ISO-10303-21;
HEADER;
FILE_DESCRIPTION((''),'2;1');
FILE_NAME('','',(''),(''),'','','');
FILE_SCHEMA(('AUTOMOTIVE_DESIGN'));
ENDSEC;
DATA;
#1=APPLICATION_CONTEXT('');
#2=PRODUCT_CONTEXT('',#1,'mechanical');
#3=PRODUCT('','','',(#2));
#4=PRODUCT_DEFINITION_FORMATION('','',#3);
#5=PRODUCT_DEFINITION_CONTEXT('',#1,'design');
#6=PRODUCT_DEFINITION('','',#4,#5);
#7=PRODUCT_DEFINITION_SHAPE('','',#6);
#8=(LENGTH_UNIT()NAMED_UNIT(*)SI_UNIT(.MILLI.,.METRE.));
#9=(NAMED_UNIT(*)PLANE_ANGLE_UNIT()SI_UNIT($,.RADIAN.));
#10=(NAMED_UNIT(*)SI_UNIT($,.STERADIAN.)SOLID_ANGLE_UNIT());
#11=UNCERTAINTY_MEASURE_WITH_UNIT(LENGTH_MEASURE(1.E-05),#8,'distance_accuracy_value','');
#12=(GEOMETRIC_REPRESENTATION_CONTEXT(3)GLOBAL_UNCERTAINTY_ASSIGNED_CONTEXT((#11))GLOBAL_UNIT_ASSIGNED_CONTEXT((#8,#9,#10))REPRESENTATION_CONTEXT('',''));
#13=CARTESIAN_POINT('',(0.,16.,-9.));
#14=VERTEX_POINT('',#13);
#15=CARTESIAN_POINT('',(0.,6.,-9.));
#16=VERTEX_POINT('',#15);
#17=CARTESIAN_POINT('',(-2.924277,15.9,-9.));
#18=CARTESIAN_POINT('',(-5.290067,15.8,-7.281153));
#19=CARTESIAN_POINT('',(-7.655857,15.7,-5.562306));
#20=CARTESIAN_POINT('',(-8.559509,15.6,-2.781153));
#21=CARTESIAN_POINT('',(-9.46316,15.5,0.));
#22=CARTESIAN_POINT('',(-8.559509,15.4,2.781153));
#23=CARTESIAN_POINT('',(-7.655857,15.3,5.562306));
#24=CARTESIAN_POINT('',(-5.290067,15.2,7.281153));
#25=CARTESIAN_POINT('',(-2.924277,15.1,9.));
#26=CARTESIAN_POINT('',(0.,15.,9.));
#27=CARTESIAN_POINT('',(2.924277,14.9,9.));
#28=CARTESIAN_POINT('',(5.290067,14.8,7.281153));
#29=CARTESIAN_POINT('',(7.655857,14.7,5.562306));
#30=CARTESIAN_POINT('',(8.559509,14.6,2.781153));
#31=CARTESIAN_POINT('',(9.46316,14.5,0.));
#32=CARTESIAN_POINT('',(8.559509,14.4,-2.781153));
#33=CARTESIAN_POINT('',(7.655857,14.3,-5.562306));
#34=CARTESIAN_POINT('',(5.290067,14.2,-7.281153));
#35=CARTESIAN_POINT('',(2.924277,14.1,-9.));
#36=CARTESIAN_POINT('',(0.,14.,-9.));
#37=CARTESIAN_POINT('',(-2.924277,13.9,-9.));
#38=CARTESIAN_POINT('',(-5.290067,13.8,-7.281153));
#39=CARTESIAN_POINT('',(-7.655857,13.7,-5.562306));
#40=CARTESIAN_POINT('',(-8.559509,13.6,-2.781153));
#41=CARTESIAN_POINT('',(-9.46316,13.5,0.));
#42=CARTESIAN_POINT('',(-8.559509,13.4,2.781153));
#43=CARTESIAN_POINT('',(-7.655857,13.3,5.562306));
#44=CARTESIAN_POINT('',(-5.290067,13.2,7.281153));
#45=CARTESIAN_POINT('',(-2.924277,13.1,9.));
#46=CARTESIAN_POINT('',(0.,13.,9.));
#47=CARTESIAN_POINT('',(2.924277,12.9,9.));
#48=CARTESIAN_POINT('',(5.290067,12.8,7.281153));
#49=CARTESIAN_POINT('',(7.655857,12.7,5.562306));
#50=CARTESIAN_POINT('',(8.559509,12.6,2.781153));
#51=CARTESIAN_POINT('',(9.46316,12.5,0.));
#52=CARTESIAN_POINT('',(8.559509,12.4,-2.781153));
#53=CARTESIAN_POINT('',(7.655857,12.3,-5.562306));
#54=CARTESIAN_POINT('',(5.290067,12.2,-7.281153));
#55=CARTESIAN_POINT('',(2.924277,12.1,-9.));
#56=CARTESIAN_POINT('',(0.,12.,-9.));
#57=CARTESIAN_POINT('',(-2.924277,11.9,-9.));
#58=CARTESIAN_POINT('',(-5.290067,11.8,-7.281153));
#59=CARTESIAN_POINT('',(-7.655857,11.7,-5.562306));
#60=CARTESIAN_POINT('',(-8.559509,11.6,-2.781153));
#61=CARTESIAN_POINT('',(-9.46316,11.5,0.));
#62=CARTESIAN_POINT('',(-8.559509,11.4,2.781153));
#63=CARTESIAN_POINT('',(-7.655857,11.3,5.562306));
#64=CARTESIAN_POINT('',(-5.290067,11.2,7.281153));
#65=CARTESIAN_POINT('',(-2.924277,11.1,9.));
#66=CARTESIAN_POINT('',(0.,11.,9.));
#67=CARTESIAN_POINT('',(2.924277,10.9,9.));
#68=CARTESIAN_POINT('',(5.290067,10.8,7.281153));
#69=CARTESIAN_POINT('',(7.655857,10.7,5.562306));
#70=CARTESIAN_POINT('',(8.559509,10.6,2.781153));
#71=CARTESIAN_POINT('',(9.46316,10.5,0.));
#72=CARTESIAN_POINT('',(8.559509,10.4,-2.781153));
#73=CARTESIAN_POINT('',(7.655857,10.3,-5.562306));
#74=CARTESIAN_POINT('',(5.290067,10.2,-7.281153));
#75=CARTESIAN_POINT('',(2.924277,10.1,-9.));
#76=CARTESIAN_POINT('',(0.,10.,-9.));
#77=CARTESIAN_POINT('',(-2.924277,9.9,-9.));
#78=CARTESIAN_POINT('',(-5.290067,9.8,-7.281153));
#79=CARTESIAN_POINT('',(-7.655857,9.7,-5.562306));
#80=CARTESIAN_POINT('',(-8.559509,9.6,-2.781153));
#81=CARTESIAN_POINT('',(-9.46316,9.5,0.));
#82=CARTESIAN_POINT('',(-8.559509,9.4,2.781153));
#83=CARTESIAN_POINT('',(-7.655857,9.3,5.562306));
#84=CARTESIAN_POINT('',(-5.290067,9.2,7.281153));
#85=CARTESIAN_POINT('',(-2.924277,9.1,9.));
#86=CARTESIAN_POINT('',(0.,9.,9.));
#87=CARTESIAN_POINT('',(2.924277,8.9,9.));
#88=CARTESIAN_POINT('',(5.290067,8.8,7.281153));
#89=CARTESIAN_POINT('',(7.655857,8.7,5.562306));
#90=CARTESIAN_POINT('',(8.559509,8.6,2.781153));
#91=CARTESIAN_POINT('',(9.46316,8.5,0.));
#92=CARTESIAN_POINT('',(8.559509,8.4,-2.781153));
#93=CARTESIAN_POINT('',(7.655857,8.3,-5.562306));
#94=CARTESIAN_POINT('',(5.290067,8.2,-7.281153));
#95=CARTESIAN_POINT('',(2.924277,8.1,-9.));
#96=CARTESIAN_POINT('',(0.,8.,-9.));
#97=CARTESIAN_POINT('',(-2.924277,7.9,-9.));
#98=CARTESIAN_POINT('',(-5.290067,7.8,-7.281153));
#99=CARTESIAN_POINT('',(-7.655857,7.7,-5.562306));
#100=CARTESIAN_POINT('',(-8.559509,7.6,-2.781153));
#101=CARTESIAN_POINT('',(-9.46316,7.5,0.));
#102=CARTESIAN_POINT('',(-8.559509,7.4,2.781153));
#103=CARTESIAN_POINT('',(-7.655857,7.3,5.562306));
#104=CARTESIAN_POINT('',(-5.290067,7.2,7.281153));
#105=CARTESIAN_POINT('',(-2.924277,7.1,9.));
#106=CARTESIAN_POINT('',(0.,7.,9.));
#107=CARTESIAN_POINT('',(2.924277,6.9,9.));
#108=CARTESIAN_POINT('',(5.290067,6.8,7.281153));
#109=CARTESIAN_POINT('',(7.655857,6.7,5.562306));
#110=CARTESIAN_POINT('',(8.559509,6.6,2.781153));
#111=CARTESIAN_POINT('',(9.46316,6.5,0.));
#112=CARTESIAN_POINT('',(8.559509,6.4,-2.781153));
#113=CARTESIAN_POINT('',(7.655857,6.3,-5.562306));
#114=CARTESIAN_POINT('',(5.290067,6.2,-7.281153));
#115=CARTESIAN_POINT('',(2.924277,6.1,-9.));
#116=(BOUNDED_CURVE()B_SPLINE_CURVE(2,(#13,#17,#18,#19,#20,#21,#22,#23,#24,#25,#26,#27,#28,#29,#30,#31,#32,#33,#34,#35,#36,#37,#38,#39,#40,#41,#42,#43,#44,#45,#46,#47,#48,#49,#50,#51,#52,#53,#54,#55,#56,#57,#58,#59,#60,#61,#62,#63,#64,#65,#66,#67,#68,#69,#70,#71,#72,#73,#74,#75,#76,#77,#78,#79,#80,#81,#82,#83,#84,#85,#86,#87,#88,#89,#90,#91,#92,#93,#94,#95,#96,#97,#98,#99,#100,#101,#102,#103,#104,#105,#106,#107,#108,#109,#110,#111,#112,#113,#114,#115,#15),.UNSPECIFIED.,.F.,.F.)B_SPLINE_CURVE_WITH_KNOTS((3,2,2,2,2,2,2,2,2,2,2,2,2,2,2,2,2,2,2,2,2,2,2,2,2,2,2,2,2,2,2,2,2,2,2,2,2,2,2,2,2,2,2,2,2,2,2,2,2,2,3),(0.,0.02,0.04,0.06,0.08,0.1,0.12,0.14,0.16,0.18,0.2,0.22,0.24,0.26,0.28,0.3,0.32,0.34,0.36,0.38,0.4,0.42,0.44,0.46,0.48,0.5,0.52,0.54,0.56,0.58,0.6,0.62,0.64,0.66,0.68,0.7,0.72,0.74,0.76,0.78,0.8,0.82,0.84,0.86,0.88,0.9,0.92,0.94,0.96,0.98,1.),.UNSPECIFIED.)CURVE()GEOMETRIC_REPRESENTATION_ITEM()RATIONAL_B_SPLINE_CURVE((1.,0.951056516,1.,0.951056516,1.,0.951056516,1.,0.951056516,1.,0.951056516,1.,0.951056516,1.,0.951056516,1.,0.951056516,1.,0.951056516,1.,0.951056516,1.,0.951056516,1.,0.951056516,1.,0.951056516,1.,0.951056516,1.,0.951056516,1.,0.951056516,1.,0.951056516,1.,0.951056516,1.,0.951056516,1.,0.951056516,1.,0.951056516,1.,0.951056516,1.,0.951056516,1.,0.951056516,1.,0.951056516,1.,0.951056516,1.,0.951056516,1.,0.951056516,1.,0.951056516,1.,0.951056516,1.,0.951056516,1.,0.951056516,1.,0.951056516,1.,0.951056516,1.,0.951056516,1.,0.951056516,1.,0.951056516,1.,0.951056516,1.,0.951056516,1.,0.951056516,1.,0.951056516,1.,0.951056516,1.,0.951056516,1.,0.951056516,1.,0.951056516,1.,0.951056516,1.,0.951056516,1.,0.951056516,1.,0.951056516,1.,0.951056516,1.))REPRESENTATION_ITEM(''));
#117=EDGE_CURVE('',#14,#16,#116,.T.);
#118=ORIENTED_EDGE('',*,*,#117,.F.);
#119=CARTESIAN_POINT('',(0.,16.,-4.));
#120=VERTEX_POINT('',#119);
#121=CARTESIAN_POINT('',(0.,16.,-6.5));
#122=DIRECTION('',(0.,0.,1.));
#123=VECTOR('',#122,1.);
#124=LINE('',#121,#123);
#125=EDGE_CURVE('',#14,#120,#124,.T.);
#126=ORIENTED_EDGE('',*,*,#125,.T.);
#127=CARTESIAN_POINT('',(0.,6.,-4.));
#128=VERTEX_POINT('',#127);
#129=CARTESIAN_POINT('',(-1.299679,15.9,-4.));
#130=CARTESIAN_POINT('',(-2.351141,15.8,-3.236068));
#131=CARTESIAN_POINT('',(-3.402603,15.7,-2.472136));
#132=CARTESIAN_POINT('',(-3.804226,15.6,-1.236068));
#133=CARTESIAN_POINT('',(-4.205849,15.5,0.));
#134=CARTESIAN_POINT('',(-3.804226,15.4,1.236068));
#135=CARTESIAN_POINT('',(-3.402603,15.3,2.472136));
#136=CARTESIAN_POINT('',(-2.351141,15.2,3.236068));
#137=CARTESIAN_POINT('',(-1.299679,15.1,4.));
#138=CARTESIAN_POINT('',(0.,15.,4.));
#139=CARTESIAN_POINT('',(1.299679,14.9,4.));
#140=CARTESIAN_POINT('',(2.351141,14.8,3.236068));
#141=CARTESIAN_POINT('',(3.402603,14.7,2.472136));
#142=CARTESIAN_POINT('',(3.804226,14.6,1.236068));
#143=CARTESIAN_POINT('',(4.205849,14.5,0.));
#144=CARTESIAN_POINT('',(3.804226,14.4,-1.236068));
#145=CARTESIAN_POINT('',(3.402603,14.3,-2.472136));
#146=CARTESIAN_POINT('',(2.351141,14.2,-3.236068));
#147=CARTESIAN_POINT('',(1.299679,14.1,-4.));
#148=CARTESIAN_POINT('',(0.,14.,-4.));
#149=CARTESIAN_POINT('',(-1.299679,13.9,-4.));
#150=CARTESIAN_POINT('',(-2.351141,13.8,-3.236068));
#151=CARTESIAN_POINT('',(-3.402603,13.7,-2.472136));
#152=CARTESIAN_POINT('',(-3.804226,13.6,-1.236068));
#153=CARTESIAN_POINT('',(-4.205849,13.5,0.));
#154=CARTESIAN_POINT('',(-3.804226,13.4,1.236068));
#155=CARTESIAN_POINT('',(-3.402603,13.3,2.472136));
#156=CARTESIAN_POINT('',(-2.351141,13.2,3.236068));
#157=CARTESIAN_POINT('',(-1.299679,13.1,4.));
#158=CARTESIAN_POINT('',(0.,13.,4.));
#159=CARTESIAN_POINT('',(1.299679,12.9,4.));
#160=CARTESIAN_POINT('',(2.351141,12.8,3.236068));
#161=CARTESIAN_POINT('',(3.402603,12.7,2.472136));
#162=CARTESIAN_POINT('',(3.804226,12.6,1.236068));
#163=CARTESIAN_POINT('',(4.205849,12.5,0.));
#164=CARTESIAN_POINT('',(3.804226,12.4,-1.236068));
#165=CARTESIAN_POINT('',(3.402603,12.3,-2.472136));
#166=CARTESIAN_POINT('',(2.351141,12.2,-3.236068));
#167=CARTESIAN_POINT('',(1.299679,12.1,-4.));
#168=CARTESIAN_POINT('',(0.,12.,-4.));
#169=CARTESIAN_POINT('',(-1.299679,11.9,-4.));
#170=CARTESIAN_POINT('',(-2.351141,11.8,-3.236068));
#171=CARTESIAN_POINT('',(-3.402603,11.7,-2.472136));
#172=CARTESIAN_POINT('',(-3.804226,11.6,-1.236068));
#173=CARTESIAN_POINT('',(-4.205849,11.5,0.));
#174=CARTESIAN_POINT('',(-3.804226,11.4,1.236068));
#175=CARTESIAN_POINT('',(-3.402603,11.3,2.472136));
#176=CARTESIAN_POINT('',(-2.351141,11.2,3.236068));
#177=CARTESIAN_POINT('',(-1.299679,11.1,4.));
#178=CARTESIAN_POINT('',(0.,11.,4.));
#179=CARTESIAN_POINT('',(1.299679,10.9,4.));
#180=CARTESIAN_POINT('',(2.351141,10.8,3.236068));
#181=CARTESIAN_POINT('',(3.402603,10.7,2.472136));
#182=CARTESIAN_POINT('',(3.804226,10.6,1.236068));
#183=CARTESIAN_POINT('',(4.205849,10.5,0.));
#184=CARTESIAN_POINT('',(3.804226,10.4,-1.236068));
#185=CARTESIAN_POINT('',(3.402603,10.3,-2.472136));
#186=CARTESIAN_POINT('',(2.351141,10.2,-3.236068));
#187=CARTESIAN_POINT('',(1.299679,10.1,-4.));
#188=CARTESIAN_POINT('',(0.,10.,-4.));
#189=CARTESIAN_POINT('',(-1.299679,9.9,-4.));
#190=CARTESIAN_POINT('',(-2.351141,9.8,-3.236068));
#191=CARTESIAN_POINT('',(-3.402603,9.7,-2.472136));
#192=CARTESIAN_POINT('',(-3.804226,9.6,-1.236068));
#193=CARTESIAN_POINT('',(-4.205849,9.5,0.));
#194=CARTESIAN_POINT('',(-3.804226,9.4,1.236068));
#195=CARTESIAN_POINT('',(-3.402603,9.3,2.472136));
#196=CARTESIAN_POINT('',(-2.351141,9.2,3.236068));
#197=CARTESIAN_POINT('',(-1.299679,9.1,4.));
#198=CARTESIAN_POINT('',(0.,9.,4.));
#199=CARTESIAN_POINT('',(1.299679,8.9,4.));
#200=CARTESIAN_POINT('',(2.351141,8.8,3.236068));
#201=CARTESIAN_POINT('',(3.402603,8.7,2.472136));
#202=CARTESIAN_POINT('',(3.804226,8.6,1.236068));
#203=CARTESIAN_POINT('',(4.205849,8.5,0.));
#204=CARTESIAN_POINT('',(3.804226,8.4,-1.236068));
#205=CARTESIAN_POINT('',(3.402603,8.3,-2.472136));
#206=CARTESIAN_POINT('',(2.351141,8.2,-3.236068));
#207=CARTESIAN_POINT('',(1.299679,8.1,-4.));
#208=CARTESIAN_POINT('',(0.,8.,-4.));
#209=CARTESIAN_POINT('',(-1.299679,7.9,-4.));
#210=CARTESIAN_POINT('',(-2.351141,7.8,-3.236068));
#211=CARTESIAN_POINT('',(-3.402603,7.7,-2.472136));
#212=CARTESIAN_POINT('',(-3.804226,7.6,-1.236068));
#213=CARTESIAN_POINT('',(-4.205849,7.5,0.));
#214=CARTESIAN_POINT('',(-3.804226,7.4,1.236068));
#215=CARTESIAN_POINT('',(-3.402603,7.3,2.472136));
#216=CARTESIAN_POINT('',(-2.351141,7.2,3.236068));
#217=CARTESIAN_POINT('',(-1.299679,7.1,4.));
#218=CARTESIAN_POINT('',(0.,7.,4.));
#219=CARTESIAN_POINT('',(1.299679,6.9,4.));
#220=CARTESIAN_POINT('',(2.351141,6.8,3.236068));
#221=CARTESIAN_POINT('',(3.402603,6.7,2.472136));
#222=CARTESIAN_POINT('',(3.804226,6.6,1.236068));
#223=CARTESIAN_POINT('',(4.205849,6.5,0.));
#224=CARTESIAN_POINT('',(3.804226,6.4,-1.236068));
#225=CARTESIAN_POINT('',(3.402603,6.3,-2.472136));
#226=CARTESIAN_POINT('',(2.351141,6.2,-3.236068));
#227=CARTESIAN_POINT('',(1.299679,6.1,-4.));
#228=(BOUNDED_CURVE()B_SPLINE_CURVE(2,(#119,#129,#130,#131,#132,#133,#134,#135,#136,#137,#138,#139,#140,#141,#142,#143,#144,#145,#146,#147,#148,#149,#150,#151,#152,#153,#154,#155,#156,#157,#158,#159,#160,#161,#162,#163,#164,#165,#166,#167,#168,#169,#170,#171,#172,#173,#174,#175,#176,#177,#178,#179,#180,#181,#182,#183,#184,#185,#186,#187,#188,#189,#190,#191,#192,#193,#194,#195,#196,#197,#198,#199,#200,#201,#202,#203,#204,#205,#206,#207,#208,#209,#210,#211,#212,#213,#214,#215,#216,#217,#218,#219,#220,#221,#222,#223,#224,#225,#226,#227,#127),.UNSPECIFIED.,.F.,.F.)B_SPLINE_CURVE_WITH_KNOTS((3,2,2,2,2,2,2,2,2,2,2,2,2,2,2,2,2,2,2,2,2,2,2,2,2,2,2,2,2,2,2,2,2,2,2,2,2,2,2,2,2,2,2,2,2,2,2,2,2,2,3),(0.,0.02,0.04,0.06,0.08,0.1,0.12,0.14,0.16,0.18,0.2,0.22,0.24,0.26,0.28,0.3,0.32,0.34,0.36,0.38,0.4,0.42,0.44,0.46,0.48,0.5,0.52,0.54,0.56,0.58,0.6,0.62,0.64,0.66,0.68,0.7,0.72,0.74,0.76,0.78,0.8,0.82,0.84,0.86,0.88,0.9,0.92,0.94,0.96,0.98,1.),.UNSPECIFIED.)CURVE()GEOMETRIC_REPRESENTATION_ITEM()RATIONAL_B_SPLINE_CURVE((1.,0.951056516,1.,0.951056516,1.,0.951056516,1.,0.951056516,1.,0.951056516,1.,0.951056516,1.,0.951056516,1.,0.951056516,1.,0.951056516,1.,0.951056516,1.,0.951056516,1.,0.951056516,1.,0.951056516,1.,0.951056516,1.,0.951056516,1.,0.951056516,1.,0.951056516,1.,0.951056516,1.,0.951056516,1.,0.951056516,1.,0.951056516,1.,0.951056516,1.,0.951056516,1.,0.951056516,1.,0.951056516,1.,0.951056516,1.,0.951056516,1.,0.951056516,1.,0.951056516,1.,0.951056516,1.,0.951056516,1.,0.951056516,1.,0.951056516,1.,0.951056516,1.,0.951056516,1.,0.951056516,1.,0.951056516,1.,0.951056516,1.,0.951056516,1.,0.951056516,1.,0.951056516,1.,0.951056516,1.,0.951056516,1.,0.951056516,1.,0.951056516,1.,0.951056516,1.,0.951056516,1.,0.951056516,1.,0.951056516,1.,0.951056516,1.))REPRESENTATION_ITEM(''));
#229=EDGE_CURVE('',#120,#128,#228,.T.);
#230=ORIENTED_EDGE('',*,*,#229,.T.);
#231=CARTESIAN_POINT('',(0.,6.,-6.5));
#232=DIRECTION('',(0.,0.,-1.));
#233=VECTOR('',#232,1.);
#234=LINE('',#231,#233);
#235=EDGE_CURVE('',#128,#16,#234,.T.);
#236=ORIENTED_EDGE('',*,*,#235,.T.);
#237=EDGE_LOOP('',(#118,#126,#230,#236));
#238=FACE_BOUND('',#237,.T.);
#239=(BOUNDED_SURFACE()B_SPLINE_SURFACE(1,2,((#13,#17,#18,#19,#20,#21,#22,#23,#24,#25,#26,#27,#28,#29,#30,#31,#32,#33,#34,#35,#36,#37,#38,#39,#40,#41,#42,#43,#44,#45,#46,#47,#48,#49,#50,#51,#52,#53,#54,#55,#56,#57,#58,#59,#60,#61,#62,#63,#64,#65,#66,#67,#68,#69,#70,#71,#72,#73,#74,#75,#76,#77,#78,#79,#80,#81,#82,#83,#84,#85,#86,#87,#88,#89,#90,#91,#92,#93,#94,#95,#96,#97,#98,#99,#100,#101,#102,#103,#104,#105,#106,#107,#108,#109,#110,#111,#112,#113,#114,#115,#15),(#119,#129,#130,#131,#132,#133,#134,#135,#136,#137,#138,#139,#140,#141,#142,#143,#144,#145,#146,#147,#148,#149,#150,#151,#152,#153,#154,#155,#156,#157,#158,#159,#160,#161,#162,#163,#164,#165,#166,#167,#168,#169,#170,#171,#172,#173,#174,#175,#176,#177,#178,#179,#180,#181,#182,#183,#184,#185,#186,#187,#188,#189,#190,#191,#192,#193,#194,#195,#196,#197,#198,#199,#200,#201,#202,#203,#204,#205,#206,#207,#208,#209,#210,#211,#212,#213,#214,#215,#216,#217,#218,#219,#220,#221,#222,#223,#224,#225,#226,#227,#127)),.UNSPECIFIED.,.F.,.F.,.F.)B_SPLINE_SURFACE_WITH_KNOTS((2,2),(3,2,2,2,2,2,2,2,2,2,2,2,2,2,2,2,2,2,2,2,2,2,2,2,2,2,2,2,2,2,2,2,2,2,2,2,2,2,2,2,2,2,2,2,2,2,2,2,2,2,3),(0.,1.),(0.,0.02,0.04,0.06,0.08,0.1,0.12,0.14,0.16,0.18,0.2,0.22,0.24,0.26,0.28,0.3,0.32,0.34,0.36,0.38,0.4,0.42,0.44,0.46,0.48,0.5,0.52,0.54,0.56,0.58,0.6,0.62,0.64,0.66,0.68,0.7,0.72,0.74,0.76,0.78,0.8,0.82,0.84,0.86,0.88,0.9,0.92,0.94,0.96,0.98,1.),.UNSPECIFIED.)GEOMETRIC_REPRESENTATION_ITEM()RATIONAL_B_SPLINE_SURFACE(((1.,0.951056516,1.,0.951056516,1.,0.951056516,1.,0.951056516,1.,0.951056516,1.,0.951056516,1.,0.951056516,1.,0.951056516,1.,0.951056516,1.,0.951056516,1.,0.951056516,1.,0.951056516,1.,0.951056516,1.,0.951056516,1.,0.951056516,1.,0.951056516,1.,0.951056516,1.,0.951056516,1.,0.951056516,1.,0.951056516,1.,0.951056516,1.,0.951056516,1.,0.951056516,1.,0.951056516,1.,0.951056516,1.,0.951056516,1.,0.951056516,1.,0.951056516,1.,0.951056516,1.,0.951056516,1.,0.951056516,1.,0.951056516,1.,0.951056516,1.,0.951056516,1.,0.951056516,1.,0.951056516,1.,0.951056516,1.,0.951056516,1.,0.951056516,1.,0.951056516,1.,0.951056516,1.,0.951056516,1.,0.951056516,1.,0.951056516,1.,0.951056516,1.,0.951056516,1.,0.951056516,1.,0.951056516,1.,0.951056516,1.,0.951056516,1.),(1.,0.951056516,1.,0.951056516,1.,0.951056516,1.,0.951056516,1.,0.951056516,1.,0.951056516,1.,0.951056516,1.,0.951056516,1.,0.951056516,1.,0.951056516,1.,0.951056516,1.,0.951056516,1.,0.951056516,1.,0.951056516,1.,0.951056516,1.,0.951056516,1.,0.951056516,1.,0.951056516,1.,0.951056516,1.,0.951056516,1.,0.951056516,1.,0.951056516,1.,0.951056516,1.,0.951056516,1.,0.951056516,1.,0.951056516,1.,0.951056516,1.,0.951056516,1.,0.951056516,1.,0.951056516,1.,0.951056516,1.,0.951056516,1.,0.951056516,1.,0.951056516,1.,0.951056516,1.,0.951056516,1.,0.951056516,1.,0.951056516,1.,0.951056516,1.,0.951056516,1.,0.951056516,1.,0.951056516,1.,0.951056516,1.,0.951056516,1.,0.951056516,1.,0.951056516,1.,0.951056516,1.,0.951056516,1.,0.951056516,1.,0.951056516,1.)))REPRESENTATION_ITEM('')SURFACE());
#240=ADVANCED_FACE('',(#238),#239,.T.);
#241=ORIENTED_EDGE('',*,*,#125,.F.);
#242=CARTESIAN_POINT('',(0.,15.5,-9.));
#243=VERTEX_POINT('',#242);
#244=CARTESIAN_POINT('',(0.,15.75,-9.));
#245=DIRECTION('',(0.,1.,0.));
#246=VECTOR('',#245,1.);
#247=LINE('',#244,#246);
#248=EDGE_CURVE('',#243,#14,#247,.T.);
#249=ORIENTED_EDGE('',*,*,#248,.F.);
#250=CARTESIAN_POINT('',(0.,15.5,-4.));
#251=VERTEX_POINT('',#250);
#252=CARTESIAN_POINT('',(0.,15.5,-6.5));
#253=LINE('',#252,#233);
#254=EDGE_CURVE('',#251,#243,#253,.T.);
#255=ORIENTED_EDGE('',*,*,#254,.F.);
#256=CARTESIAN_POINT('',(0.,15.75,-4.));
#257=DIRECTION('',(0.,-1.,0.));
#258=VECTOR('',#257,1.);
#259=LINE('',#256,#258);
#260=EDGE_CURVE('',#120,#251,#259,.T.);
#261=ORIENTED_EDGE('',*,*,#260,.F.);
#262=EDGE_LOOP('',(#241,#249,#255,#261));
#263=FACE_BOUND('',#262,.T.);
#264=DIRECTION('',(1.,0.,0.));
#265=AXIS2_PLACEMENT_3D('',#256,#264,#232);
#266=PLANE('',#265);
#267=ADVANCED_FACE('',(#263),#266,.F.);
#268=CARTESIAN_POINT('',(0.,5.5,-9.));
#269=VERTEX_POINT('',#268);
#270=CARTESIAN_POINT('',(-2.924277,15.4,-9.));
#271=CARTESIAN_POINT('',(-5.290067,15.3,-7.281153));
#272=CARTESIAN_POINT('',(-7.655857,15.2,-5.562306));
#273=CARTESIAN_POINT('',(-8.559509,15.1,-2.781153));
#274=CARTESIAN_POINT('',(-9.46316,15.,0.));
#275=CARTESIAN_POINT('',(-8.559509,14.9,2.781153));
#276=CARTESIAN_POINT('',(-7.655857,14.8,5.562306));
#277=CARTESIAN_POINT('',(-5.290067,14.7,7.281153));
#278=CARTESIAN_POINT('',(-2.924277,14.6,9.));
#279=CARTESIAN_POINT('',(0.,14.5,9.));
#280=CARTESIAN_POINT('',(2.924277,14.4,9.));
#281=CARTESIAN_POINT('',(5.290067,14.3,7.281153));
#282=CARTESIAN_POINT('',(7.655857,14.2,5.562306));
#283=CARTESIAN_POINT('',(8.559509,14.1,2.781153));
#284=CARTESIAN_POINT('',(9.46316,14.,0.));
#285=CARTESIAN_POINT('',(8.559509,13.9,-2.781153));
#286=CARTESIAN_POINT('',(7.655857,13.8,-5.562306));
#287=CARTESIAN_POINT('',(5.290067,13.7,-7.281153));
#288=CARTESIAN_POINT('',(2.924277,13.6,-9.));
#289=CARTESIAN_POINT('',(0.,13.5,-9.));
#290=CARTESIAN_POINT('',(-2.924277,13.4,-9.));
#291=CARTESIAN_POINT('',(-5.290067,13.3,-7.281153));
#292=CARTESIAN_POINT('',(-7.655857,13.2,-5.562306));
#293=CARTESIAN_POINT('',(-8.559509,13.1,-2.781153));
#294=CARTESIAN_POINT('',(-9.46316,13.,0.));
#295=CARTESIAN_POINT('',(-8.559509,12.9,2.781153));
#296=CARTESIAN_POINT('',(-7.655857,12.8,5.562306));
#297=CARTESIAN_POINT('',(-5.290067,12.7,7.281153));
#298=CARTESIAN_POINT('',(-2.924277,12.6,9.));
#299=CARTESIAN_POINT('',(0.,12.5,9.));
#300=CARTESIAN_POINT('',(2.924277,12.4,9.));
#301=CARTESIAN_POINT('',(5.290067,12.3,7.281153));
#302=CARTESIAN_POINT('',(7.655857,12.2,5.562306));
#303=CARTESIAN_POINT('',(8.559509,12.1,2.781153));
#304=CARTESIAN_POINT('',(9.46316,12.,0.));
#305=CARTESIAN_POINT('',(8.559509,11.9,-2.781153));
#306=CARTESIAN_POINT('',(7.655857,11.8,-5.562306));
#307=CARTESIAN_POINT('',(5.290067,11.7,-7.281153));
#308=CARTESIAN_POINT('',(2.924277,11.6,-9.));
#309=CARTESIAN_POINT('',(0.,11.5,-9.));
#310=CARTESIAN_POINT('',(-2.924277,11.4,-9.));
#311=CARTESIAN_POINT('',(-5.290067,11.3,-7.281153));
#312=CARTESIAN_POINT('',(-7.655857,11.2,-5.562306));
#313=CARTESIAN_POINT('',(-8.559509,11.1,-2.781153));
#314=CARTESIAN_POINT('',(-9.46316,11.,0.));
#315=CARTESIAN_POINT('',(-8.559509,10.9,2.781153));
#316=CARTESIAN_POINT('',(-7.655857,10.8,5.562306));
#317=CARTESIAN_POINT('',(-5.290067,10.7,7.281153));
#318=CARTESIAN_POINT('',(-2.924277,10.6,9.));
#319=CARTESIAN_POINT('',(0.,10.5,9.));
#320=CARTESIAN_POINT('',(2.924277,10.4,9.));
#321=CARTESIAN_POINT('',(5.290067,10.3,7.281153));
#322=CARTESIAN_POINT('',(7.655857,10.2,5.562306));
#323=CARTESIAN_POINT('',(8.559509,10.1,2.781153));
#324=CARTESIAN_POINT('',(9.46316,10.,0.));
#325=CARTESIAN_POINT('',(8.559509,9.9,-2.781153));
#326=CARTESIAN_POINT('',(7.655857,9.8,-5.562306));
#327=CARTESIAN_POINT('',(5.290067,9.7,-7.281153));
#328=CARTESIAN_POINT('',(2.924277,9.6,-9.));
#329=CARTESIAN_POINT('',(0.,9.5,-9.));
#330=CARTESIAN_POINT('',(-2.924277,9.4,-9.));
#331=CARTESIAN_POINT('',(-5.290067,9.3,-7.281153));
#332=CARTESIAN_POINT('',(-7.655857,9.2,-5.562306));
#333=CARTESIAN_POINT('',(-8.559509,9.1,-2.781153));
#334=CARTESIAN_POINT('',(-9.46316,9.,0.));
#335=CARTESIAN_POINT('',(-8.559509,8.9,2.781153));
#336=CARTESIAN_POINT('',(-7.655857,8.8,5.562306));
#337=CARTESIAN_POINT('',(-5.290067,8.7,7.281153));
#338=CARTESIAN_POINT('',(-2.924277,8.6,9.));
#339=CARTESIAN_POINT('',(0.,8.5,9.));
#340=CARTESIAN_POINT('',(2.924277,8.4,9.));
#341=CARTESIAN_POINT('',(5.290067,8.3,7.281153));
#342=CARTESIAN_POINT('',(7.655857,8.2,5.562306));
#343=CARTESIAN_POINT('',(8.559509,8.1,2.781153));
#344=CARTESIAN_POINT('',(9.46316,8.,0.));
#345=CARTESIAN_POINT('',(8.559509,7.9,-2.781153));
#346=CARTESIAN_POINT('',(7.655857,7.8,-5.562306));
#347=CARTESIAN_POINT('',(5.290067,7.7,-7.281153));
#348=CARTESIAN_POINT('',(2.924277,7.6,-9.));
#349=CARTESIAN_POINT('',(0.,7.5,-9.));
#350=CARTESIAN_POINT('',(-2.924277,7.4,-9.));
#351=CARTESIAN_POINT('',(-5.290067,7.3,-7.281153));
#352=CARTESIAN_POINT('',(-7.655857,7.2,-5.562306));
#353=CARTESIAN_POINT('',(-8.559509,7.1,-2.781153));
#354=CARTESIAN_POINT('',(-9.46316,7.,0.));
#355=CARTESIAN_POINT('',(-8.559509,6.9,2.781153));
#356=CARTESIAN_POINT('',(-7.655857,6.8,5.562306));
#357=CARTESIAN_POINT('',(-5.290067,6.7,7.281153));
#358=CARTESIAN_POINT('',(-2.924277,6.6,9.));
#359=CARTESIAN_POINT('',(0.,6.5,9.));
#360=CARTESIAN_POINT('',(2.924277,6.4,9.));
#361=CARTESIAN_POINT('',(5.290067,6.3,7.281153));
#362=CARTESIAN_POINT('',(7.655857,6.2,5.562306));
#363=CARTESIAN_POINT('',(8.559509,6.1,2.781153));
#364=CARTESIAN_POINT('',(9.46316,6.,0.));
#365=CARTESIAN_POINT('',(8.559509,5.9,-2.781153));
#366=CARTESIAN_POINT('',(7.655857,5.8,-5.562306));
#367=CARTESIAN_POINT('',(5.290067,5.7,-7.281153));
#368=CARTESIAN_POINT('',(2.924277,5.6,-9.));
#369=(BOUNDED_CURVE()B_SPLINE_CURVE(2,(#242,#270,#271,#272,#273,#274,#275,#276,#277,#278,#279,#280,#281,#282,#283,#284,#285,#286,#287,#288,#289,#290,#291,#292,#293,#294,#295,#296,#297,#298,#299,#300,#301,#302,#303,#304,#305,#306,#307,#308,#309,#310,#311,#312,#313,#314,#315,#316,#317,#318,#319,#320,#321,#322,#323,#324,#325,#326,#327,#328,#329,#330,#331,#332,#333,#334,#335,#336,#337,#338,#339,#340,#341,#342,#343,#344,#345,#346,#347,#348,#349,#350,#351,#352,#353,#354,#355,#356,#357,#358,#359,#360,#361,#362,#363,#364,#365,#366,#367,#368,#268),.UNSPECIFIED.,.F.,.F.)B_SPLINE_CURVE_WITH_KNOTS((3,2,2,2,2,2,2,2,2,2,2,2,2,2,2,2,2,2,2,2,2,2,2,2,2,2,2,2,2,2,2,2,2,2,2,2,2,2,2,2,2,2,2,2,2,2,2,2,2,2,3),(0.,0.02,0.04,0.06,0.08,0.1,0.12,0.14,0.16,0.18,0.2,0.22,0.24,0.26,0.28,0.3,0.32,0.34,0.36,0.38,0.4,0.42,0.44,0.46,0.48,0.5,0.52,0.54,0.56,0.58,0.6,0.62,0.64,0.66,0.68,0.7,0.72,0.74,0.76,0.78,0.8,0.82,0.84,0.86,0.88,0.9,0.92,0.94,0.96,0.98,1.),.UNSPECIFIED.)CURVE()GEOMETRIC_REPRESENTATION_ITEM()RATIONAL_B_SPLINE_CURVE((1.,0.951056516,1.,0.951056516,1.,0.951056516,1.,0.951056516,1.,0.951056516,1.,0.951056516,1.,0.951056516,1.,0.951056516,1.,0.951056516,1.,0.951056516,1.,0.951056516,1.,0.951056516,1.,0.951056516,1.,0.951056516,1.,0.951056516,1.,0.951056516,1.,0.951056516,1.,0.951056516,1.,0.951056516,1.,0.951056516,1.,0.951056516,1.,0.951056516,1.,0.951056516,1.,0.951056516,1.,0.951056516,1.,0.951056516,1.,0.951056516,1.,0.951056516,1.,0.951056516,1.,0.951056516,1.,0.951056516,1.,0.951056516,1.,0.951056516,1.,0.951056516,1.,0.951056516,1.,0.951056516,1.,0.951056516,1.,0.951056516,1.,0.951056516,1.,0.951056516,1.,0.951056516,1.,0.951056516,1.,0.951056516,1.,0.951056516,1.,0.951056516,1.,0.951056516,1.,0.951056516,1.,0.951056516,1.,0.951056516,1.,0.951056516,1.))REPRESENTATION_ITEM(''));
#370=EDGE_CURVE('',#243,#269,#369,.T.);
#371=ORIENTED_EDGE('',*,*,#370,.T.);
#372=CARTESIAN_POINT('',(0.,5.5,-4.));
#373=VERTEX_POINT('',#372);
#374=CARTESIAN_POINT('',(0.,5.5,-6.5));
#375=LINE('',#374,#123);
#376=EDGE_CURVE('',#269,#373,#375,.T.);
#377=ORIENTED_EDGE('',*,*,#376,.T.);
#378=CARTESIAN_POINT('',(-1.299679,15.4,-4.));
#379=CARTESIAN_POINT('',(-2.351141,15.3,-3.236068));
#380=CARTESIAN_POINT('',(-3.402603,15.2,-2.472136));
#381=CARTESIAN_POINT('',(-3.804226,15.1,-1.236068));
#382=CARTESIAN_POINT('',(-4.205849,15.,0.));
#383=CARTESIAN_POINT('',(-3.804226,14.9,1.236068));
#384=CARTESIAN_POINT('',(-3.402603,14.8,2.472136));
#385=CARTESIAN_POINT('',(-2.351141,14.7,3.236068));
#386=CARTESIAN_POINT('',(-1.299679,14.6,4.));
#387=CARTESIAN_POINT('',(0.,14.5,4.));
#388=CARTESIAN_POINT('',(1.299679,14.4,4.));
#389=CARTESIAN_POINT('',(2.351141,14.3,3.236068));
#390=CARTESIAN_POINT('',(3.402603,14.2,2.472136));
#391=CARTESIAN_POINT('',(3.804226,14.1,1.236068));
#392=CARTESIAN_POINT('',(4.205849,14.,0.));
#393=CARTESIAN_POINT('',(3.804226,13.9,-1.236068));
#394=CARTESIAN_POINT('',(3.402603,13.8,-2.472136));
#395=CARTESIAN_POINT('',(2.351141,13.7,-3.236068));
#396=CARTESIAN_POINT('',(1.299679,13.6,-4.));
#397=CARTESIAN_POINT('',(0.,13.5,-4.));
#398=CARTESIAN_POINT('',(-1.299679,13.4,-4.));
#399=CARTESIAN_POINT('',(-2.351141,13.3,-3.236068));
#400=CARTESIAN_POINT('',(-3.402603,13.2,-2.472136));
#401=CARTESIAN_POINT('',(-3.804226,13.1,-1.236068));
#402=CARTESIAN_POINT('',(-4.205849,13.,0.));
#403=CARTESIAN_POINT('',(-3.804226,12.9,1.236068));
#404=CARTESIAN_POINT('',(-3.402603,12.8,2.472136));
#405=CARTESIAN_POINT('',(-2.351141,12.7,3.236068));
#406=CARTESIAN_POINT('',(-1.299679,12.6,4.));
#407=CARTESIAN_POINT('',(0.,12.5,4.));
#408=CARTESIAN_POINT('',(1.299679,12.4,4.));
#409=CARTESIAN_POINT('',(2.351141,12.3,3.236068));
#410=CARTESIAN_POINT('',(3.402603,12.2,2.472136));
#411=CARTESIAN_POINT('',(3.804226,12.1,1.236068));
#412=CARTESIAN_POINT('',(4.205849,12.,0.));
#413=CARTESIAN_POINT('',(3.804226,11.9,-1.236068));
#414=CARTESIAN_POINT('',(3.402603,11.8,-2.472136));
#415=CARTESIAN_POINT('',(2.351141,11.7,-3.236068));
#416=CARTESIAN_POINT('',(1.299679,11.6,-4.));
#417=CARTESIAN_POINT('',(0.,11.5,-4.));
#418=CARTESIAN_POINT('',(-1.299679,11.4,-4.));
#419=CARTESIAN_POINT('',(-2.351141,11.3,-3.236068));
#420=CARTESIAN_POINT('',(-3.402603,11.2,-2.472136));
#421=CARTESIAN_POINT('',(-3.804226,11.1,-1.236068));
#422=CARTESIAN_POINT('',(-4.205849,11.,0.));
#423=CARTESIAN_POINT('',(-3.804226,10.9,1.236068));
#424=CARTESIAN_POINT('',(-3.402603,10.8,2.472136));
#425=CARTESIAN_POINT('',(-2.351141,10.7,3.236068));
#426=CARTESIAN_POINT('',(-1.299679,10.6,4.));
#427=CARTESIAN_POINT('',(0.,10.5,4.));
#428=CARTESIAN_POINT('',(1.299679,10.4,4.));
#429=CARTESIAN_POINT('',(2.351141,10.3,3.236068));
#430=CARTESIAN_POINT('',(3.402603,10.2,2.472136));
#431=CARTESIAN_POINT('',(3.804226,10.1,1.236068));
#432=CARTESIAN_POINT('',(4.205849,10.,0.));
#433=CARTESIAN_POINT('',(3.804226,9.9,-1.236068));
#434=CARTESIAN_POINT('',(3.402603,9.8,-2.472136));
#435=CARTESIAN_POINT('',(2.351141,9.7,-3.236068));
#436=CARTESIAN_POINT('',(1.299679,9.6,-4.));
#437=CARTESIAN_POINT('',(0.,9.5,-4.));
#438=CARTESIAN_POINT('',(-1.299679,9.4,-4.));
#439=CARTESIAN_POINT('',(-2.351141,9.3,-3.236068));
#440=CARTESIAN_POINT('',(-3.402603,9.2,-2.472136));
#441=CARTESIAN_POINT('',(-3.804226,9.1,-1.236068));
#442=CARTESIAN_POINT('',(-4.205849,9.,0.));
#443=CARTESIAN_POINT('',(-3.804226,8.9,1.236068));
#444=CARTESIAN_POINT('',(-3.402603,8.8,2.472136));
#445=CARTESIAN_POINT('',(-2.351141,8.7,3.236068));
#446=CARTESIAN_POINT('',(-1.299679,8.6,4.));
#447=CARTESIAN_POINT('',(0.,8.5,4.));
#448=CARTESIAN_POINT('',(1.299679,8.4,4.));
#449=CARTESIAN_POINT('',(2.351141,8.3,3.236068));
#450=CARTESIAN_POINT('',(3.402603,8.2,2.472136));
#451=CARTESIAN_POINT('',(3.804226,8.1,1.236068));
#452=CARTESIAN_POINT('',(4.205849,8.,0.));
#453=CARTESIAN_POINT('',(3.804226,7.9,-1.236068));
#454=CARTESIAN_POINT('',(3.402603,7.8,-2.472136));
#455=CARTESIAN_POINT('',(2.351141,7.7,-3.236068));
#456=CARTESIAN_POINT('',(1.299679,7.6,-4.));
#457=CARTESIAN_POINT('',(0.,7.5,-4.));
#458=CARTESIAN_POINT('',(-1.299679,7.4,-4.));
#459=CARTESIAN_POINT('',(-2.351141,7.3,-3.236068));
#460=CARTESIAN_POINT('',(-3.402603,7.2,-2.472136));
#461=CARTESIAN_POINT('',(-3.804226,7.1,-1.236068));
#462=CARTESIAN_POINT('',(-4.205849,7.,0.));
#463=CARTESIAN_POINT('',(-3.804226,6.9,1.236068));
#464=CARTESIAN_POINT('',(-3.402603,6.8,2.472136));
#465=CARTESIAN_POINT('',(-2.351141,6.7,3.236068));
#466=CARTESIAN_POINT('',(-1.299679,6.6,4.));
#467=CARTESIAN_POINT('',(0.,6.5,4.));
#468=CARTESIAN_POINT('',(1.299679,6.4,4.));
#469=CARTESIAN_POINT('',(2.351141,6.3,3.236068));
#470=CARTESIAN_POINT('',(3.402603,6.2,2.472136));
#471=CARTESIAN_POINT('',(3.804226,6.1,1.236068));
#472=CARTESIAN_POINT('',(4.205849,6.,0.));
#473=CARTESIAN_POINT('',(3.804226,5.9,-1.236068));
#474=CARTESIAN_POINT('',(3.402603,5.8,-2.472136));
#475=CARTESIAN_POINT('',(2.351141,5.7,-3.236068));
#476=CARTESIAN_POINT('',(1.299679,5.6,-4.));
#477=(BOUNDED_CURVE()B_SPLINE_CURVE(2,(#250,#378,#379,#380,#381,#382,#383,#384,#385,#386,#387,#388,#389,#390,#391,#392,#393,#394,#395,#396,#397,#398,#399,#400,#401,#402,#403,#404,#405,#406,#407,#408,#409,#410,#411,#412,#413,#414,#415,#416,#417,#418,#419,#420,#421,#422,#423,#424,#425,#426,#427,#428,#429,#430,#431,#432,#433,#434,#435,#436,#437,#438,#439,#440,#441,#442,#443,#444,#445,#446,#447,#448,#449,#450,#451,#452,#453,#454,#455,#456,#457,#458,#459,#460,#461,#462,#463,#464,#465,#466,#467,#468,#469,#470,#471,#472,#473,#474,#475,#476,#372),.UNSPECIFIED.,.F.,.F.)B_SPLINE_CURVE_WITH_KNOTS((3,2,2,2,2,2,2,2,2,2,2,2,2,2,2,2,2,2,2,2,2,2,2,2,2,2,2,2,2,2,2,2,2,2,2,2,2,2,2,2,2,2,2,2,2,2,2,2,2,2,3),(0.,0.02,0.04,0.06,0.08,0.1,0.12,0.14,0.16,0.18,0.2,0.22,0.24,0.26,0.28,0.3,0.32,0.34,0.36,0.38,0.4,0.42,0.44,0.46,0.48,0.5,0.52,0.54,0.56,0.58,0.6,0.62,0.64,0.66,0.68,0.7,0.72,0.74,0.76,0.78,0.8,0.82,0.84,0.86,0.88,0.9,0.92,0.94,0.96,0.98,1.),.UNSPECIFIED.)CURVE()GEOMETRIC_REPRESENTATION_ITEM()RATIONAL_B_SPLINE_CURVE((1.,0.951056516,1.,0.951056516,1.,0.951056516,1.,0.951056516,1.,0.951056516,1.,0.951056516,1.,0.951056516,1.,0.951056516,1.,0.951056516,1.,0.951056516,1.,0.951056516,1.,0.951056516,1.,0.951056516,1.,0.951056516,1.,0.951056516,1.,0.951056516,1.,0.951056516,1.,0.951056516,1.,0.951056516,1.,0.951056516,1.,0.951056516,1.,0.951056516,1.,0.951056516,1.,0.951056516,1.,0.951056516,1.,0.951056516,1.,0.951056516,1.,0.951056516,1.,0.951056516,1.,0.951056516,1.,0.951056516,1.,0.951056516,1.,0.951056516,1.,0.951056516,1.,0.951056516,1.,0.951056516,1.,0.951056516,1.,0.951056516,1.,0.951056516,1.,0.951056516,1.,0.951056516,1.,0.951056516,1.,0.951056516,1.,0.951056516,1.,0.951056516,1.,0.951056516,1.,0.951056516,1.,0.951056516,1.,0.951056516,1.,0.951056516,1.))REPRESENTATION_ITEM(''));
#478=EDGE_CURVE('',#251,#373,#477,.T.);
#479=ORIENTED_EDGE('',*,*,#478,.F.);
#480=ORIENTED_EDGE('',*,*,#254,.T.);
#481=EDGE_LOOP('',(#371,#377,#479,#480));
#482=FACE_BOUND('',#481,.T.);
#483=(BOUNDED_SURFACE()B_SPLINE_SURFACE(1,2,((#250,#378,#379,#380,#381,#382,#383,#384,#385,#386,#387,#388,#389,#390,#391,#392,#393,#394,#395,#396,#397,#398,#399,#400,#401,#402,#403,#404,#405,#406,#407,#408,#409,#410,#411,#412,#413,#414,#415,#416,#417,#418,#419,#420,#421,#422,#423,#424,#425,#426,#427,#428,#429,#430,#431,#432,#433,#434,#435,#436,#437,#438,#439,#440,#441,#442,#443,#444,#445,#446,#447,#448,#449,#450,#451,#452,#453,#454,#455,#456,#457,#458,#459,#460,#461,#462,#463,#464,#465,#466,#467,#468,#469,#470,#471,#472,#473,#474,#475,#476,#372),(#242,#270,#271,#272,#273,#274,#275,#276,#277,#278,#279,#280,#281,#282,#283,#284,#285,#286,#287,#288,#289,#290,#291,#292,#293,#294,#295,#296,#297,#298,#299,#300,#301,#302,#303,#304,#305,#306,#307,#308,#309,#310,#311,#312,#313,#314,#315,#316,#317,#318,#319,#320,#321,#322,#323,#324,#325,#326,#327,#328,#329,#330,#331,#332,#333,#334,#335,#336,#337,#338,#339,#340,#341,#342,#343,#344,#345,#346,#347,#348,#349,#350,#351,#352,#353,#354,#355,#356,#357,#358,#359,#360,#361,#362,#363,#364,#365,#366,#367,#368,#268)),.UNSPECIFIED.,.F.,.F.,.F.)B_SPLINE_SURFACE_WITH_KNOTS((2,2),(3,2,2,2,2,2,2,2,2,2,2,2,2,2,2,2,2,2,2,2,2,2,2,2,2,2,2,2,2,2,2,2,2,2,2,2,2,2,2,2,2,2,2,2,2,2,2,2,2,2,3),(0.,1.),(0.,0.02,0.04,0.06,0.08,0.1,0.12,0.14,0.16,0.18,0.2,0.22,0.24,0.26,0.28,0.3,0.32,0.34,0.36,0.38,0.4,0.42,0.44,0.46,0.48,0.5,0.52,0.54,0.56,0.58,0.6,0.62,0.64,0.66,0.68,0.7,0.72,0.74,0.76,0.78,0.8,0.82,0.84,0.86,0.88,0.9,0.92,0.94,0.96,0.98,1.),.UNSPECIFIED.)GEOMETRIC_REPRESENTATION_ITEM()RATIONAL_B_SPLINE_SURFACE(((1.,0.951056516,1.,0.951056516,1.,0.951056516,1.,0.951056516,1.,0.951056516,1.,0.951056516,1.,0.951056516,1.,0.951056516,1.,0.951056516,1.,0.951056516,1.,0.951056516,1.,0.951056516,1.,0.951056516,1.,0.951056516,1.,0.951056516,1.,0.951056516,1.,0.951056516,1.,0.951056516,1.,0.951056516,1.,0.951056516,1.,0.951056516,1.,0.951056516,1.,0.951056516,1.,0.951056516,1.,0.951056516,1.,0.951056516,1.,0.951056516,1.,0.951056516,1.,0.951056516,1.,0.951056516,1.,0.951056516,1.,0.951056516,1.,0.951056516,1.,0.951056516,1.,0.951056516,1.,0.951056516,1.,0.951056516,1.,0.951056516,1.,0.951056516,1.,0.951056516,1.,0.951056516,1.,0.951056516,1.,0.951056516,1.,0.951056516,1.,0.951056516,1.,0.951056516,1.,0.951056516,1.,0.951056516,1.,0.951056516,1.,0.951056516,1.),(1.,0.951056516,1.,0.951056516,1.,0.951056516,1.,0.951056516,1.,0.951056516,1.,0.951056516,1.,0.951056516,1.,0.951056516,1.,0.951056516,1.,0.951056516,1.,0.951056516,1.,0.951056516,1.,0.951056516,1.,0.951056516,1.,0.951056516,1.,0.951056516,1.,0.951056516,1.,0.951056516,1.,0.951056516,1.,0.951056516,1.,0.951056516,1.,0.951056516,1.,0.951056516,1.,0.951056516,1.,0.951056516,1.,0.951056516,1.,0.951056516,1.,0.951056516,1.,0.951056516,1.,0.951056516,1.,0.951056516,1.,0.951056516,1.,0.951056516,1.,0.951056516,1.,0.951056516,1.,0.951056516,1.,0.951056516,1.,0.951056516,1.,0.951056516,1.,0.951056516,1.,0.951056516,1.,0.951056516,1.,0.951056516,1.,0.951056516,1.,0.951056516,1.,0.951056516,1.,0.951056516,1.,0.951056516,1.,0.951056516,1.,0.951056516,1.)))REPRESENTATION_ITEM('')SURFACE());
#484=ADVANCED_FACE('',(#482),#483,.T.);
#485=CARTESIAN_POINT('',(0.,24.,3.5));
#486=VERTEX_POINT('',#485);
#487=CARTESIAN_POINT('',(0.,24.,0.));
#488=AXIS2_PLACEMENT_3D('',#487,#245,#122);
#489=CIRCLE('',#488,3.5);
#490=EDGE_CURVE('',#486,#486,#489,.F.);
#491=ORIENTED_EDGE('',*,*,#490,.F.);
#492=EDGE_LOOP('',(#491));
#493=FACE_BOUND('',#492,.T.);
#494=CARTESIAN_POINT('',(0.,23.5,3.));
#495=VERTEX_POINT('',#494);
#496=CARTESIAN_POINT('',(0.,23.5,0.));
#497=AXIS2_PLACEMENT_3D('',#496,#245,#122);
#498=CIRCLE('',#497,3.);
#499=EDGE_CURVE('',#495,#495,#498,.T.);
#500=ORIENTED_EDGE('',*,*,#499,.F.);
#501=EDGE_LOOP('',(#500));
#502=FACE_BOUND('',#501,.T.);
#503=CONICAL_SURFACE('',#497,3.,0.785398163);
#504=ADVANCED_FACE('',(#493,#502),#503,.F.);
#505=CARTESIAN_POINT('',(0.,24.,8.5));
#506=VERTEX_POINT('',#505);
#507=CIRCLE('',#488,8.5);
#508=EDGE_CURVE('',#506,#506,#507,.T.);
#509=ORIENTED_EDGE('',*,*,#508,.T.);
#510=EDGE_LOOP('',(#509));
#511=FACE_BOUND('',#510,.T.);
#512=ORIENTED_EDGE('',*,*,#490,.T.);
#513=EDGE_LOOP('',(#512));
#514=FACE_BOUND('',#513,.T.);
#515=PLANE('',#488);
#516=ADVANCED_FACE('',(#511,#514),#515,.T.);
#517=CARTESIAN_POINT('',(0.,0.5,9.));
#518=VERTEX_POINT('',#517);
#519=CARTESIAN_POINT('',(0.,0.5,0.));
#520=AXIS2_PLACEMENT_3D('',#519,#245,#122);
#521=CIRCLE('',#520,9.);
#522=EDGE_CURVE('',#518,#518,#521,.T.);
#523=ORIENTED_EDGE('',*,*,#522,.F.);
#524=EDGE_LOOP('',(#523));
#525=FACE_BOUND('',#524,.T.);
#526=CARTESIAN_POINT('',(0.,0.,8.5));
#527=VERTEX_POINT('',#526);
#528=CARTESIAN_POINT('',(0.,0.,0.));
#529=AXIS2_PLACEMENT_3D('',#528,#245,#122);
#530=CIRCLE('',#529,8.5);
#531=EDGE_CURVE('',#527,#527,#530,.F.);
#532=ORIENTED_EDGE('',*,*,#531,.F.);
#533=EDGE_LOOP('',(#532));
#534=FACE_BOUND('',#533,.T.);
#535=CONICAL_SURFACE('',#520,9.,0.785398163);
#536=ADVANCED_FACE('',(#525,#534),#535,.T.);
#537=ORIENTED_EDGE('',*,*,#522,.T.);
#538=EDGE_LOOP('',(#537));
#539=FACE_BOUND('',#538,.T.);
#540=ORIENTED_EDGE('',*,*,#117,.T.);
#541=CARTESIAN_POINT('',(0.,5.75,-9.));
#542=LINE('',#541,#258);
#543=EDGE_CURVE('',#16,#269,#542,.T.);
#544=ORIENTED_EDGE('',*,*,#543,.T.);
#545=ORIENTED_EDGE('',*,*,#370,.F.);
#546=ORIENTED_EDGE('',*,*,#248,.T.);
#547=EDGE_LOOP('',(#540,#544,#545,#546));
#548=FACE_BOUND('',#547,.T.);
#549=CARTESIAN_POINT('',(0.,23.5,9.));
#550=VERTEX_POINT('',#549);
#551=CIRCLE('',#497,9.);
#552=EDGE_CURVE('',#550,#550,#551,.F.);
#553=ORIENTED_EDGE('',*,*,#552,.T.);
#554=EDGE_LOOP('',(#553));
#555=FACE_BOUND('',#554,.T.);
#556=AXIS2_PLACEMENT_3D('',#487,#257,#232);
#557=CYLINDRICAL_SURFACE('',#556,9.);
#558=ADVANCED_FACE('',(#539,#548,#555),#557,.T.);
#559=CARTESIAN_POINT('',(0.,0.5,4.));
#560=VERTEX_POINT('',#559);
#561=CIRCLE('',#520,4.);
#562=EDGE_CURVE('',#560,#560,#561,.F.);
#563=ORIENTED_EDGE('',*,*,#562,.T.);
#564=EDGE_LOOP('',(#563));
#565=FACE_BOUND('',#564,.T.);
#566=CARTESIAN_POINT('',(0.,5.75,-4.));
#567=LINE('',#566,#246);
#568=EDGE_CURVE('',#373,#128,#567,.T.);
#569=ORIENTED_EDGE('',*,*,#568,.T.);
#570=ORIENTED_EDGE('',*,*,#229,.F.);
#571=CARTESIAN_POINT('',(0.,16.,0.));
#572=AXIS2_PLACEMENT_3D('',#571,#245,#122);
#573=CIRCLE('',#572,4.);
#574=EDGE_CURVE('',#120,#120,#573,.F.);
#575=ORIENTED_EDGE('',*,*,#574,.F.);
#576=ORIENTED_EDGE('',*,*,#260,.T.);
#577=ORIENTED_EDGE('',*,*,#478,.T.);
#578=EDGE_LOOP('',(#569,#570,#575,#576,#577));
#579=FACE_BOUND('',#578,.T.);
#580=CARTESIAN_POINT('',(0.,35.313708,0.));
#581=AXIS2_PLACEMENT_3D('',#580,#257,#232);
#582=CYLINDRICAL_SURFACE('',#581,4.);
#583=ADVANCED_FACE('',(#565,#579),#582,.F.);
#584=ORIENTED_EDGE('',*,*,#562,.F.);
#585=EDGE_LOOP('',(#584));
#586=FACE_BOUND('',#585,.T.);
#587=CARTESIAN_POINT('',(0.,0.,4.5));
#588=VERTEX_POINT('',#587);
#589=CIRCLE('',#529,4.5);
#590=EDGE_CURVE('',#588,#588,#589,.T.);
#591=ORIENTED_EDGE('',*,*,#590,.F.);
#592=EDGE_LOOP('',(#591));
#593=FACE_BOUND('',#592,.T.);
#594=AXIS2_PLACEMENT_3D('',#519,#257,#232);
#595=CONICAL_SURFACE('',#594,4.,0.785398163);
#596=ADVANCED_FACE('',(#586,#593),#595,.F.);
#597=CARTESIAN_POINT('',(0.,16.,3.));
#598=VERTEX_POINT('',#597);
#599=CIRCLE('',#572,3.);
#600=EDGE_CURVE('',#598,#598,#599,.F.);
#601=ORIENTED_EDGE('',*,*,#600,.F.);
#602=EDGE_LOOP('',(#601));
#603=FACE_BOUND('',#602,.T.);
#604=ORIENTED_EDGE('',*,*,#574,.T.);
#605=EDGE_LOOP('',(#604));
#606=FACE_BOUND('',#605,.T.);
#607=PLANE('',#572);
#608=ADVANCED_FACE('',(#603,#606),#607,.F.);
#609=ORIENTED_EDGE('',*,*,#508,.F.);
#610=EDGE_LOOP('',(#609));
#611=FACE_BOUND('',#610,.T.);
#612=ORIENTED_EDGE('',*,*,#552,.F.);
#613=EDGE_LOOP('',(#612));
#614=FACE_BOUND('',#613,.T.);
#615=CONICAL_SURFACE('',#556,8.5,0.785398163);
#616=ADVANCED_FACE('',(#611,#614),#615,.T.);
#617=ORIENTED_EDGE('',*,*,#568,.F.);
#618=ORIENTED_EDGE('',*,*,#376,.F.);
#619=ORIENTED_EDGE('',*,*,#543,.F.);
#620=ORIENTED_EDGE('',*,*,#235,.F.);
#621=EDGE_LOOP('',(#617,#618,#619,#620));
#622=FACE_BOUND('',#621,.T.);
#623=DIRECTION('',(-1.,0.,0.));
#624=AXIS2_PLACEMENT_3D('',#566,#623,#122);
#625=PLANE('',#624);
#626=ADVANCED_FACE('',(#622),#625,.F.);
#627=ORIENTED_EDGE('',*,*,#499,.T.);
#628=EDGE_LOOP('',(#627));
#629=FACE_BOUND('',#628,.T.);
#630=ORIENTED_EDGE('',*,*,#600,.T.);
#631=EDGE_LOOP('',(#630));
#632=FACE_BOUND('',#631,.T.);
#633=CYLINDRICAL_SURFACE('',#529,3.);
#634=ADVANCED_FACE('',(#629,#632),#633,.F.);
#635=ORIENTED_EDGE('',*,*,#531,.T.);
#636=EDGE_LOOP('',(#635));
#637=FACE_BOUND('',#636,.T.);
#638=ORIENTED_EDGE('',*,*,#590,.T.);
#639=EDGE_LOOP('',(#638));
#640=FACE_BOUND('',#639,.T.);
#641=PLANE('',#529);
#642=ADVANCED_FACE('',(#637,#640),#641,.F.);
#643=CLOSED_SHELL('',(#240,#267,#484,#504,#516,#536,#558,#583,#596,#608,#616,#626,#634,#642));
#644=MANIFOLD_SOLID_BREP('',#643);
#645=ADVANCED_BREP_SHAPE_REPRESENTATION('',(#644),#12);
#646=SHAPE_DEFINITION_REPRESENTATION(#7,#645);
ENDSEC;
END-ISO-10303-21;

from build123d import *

# Parameters (mm, degrees)
SKETCH1_R           = 9
BOSS_EXTRUDE1_DEPTH = 24
SKETCH2_R           = 3
CUT_EXTRUDE1_DEPTH  = 28.166155414
SKETCH3_R           = 4
CUT_EXTRUDE2_DEPTH  = 16
CHAMFER1_SIZE       = 0.5
CUT_SWEEP2_PITCH    = 2


with BuildPart() as part:
    # Sketch1 → Boss-Extrude1 (new body)
    with BuildSketch(Plane(origin=(0, 0, 0), x_dir=(1, 0, 0), z_dir=(0, 1, 0))):
        with Locations(Location((0, 0, 0), (0, 0, 270))):
            Circle(SKETCH1_R)
    extrude(amount=BOSS_EXTRUDE1_DEPTH)

    # Sketch2 → Cut-Extrude1 (cut, through all)
    with BuildSketch(Plane(origin=(0, 24, 0), x_dir=(1, 0, 0), z_dir=(0, 1, 0))):
        with Locations(Location((0, 0, 0), (0, 0, 270))):
            Circle(SKETCH2_R)
    extrude(amount=-CUT_EXTRUDE1_DEPTH, mode=Mode.SUBTRACT)

    # Sketch3 → Cut-Extrude2 (cut)
    with BuildSketch(Plane.XZ):
        with Locations(Location((0, 0, 0), (0, 0, 270))):
            Circle(SKETCH3_R)
    extrude(amount=-CUT_EXTRUDE2_DEPTH, mode=Mode.SUBTRACT)

    # Chamfer1
    chamfer1_edges = [part.edges().sort_by_distance(p)[0] for p in [
        (0, 0, 4),
        (0, 0, -9),
        (0, 24, -9),
        (0, 24, -3),
    ]]
    chamfer(chamfer1_edges, length=CHAMFER1_SIZE)

    # Cut-Sweep2: the profile of Sketch8 profile screwed along a left-hand helix of 5 turns, 10 arcs to a turn; built about Z, then put on its axis
    cut_sweep2_z = Axis((0, 0, 0), (0, 0, 1))
    cut_sweep2_corners = [(9, 0, 0), (3.9997, 0, 0), (3.9997, 0, 0.5), (9, 0, 0.5)]
    with BuildLine(mode=Mode.PRIVATE) as cut_sweep2_profile:
        Line(cut_sweep2_corners[0], cut_sweep2_corners[1])
        Line(cut_sweep2_corners[1], cut_sweep2_corners[2])
        Line(cut_sweep2_corners[2], cut_sweep2_corners[3])
        Line(cut_sweep2_corners[3], cut_sweep2_corners[0])
    cut_sweep2_cap = Face(cut_sweep2_profile.wire())
    cut_sweep2_turn_angles = [0, -18, -36, -54, -72, -90, -108, -126, -144, -162, -180, -198, -216, -234, -252, -270, -288, -306, -324, -342, -360]
    cut_sweep2_turn_weights = [1, 0.9510565162951535, 1, 0.9510565162951535, 1, 0.9510565162951535, 1, 0.9510565162951535, 1, 0.9510565162951535, 1, 0.9510565162951535, 1, 0.9510565162951535, 1, 0.9510565162951535, 1, 0.9510565162951535, 1, 0.9510565162951535, 1]
    cut_sweep2_turn_rails = [Edge.make_bspline([Vector(p[0], p[1], 0).rotate(cut_sweep2_z, cut_sweep2_turn_angles[k]) / cut_sweep2_turn_weights[k] + Vector(0, 0, p[2] + -CUT_SWEEP2_PITCH * cut_sweep2_turn_angles[k] / 360) for k in range(21)], [0, 0, 0, 1, 1, 2, 2, 3, 3, 4, 4, 5, 5, 6, 6, 7, 7, 8, 8, 9, 9, 10, 10, 10], 2, cut_sweep2_turn_weights) for p in cut_sweep2_corners]
    cut_sweep2_turn_sides = [Face.make_surface_from_curves(cut_sweep2_turn_rails[p[0]], cut_sweep2_turn_rails[p[1]]) for p in [(0, 1), (1, 2), (2, 3), (3, 0)]]
    cut_sweep2 = Plane(origin=(0, 16, 0), x_dir=(0, 0, -1), z_dir=(0, -1, 0)) * Solid(Shell([*[p.moved(Location((0, 0, CUT_SWEEP2_PITCH * i))) for i in range(5) for p in cut_sweep2_turn_sides], cut_sweep2_cap, cut_sweep2_cap.rotate(cut_sweep2_z, -1800).moved(Location((0, 0, -CUT_SWEEP2_PITCH * -1800 / 360)))]))
    add(cut_sweep2, mode=Mode.SUBTRACT)


solid = part.part
